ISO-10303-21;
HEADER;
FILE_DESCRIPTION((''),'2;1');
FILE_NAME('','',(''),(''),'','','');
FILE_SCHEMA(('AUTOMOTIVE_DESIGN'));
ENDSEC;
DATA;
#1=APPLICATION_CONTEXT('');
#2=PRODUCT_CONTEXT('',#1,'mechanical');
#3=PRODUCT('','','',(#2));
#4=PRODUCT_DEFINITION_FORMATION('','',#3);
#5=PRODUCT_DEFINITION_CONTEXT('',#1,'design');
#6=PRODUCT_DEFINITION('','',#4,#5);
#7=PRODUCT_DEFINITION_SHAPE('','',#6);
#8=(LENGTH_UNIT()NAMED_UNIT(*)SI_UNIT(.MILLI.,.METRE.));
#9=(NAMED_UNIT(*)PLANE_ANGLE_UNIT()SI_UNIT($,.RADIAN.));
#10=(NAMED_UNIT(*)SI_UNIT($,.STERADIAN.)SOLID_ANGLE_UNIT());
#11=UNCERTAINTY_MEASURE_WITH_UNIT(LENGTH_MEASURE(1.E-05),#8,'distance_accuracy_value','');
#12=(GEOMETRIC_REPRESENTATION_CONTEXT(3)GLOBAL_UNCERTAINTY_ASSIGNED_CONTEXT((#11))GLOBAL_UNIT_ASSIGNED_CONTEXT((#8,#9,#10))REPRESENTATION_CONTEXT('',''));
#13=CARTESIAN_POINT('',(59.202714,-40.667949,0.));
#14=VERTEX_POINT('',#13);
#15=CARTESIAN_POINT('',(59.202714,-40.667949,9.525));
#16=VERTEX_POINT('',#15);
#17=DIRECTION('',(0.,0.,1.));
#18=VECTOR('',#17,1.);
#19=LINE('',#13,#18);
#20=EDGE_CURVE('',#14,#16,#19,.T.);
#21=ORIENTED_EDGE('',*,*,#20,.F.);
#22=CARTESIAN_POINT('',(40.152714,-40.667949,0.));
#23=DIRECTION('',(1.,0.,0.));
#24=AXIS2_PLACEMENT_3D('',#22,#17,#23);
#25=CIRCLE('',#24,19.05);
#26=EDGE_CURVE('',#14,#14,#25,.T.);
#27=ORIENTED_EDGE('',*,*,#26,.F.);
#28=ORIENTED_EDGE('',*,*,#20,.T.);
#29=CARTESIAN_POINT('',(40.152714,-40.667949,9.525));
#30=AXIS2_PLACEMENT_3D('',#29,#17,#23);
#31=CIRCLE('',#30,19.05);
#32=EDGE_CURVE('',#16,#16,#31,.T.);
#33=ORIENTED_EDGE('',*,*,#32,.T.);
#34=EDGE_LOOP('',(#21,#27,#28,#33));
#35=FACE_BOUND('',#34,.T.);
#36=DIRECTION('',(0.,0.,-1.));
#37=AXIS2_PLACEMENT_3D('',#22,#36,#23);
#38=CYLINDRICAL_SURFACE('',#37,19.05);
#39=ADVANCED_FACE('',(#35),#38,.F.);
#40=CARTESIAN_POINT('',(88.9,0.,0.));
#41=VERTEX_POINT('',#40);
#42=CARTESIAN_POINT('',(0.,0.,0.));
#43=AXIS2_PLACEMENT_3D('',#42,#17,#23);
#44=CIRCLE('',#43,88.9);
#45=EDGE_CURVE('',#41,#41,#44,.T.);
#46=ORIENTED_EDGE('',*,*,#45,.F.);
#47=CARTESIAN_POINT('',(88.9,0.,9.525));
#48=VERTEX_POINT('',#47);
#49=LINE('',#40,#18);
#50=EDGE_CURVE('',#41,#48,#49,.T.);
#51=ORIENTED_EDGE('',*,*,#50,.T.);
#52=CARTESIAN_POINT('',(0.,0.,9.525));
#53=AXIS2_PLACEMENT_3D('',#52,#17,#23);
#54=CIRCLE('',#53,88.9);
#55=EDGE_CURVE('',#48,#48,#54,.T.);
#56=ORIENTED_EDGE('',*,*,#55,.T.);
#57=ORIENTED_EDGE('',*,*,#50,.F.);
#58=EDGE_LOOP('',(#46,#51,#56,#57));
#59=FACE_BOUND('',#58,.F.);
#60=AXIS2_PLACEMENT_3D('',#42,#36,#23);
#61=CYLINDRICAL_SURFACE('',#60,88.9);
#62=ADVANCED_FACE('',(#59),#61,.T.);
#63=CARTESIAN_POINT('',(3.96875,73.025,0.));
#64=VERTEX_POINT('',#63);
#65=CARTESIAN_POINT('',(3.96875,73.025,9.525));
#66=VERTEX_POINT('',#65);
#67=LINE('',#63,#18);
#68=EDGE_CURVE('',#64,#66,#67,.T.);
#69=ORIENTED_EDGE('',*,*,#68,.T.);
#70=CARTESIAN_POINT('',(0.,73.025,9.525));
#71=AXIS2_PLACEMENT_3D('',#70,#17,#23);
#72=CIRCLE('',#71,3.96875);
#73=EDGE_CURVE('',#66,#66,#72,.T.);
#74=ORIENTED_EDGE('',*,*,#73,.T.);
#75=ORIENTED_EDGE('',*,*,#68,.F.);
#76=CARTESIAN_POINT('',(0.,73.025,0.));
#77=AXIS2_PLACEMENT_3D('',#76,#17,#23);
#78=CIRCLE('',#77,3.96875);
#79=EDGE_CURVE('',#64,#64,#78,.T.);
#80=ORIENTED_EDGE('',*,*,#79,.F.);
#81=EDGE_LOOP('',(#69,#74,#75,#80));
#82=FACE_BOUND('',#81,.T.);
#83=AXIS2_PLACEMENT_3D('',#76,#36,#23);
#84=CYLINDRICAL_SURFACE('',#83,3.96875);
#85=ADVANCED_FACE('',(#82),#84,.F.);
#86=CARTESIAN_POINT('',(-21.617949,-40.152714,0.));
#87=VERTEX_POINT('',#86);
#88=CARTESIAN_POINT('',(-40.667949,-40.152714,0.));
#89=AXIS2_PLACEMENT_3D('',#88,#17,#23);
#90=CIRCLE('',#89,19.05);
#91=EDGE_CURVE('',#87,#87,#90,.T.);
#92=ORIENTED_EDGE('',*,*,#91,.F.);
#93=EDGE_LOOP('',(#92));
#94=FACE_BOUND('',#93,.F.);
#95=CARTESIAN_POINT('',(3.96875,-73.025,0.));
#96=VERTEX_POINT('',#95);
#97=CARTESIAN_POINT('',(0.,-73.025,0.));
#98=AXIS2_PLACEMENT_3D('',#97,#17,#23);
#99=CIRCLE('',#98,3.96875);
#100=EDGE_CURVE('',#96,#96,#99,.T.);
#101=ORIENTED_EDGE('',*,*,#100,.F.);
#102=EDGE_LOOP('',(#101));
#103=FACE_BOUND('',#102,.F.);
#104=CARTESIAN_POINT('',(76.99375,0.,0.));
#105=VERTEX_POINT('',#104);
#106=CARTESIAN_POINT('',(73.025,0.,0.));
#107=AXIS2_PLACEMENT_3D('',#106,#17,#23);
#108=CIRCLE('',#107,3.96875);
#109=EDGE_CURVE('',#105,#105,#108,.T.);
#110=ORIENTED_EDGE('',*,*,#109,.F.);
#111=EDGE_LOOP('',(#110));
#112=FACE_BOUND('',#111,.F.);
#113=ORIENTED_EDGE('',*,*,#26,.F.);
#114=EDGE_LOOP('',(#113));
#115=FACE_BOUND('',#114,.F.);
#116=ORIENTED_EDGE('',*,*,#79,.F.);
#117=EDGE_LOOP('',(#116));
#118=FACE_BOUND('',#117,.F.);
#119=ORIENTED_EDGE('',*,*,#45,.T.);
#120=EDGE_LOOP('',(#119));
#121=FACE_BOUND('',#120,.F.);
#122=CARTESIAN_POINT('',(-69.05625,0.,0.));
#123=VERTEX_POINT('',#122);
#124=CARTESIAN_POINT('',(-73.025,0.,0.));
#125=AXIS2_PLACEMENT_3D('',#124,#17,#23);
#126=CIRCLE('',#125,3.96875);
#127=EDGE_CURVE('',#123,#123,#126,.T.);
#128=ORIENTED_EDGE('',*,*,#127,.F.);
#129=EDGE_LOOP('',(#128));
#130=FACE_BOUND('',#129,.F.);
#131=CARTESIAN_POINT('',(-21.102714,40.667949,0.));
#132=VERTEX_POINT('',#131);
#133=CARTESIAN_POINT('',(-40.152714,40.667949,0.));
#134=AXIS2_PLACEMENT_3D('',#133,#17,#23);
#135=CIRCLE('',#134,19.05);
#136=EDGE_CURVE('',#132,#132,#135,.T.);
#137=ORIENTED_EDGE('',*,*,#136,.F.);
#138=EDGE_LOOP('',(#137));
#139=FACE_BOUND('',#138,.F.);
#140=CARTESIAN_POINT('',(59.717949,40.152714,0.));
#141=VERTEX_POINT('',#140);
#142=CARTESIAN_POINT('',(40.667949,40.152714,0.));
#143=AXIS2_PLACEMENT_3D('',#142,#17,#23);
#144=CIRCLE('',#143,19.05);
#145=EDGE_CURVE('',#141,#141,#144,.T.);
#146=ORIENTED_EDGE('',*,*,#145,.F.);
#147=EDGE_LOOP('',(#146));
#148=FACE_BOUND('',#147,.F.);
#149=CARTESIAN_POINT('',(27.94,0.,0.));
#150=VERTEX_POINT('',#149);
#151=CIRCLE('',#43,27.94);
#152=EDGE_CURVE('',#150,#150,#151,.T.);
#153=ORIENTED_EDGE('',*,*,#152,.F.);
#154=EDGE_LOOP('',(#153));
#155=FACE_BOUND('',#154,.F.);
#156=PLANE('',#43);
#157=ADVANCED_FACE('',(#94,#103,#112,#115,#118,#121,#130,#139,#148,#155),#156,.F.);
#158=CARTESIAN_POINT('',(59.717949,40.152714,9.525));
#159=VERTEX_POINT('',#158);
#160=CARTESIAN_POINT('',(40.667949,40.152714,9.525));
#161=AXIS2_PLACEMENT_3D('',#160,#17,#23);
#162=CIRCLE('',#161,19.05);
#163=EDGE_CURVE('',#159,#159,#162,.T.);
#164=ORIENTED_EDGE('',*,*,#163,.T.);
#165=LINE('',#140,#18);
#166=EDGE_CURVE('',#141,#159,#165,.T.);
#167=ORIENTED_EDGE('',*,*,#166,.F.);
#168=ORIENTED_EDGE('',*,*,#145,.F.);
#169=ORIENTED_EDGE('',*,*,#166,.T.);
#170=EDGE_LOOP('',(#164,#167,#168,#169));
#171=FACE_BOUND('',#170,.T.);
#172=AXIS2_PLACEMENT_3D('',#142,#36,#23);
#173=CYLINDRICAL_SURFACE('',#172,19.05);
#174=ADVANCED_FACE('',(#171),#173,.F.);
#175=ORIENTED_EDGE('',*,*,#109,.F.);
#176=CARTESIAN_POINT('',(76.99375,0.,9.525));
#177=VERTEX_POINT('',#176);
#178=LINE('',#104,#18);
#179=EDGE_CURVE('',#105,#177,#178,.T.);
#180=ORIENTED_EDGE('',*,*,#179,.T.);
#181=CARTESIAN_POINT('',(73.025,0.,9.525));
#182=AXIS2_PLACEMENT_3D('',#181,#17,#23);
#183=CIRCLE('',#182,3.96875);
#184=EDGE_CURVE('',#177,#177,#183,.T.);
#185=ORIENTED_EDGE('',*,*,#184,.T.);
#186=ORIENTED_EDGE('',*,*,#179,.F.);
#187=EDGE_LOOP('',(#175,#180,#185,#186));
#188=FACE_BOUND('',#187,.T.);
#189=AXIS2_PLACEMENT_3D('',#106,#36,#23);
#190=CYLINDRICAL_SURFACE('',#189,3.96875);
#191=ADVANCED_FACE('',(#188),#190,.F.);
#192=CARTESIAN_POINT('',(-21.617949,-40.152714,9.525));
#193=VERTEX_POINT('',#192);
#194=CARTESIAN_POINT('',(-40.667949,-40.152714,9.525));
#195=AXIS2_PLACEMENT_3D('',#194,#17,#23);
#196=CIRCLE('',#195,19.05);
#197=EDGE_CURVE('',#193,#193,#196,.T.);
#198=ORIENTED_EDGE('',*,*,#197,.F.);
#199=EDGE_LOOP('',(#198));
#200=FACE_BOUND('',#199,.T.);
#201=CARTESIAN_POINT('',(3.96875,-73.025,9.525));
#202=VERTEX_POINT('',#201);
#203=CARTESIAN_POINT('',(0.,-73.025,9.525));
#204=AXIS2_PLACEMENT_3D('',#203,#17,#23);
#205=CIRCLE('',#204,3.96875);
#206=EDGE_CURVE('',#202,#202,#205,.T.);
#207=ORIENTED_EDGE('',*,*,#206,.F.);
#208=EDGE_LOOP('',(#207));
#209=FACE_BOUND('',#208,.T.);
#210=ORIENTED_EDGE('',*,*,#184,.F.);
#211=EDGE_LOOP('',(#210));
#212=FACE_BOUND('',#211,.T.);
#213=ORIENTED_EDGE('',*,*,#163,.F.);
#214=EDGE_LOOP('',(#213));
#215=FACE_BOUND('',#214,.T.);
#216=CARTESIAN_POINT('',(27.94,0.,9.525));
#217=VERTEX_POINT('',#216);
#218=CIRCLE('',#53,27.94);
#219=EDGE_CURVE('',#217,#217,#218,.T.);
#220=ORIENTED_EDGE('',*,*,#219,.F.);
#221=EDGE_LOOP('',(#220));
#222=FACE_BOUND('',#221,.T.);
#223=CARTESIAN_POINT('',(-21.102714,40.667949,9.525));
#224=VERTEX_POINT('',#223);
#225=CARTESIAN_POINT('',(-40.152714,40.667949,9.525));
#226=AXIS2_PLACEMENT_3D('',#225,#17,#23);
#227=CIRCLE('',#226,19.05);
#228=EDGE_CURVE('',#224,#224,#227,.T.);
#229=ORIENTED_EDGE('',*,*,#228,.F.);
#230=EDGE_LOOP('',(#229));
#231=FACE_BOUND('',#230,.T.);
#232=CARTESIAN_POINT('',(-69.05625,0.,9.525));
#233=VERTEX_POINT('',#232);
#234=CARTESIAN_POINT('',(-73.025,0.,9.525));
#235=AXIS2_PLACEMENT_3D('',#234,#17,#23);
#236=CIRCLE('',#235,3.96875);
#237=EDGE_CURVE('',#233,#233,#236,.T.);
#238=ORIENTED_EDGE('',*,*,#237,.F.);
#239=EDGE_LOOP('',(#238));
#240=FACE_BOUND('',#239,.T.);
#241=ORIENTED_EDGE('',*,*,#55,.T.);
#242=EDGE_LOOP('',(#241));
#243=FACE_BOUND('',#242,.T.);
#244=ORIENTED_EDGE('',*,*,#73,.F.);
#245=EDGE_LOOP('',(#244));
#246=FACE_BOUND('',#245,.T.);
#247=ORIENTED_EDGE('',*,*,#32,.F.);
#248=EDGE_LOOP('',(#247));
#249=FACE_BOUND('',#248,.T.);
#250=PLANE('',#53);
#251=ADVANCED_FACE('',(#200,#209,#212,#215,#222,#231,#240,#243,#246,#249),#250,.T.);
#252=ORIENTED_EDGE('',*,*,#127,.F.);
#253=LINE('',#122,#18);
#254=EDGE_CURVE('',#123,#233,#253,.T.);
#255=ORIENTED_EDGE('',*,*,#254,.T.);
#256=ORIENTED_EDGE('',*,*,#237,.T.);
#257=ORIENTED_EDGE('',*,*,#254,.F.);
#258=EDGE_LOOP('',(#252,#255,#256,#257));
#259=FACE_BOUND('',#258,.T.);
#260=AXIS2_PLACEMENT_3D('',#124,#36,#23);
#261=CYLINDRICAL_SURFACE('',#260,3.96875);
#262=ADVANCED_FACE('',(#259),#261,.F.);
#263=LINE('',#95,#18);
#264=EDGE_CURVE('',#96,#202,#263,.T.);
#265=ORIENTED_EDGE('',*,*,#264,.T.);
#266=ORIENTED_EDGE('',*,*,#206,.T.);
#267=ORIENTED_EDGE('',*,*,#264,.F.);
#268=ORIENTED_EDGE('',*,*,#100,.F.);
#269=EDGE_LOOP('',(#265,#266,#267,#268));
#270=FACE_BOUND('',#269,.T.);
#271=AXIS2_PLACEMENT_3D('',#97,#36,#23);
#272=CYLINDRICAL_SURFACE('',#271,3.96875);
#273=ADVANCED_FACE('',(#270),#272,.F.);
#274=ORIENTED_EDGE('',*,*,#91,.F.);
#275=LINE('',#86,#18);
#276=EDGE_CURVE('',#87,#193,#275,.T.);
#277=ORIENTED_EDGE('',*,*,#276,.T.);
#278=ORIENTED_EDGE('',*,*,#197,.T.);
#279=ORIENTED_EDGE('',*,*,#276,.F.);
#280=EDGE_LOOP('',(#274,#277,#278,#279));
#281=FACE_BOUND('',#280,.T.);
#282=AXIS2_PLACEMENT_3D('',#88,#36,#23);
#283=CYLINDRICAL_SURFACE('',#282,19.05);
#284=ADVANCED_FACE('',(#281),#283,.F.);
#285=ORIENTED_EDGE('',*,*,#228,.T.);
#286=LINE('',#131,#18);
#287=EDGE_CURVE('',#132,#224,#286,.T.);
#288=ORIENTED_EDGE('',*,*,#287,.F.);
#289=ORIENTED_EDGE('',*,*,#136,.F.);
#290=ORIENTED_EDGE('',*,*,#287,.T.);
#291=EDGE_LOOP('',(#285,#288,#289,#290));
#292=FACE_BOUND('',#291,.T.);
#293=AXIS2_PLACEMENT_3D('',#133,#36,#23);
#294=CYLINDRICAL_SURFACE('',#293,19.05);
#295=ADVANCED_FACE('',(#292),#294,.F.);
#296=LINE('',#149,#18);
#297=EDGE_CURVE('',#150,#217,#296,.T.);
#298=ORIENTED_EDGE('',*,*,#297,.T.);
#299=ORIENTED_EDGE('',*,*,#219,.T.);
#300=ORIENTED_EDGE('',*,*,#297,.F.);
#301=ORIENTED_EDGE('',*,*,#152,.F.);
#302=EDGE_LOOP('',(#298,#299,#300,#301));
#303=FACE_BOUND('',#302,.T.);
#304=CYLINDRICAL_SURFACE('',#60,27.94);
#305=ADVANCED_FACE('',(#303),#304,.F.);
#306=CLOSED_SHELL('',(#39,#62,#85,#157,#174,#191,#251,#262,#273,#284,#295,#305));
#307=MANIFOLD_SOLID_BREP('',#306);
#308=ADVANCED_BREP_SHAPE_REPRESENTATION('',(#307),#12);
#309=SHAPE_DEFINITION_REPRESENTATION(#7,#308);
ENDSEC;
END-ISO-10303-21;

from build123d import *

# Parameters (mm, degrees)
F0_R     = 88.9
F0_R_2   = 19.05
F0_R_3   = 3.96875
F0_R_4   = 27.94
F1_DEPTH = 9.525


# Not quite as in the source:
# - a length typed as a fraction of an inch, garbled in the dataset ("3 / 203.2 mm" for 3/8 in), is restored


with BuildPart() as f1:
    # F0 (on Top) → F1 (new body)
    with BuildSketch(Plane.XY):
        Circle(F0_R)
        with Locations((-40.6679487148, -40.1527140717)):
            Circle(F0_R_2, mode=Mode.SUBTRACT)
        with Locations((0, -73.025)):
            Circle(F0_R_3, mode=Mode.SUBTRACT)
        with Locations((40.1527140717, -40.6679487148)):
            Circle(F0_R_2, mode=Mode.SUBTRACT)
        with Locations((-73.025, 0)):
            Circle(F0_R_3, mode=Mode.SUBTRACT)
        with Locations((-40.1527140717, 40.6679487148)):
            Circle(F0_R_2, mode=Mode.SUBTRACT)
        Circle(F0_R_4, mode=Mode.SUBTRACT)
        with Locations((40.6679487148, 40.1527140717)):
            Circle(F0_R_2, mode=Mode.SUBTRACT)
        with Locations((73.025, 0)):
            Circle(F0_R_3, mode=Mode.SUBTRACT)
        with Locations((0, 73.025)):
            Circle(F0_R_3, mode=Mode.SUBTRACT)
    extrude(amount=F1_DEPTH)


solid = f1.part
